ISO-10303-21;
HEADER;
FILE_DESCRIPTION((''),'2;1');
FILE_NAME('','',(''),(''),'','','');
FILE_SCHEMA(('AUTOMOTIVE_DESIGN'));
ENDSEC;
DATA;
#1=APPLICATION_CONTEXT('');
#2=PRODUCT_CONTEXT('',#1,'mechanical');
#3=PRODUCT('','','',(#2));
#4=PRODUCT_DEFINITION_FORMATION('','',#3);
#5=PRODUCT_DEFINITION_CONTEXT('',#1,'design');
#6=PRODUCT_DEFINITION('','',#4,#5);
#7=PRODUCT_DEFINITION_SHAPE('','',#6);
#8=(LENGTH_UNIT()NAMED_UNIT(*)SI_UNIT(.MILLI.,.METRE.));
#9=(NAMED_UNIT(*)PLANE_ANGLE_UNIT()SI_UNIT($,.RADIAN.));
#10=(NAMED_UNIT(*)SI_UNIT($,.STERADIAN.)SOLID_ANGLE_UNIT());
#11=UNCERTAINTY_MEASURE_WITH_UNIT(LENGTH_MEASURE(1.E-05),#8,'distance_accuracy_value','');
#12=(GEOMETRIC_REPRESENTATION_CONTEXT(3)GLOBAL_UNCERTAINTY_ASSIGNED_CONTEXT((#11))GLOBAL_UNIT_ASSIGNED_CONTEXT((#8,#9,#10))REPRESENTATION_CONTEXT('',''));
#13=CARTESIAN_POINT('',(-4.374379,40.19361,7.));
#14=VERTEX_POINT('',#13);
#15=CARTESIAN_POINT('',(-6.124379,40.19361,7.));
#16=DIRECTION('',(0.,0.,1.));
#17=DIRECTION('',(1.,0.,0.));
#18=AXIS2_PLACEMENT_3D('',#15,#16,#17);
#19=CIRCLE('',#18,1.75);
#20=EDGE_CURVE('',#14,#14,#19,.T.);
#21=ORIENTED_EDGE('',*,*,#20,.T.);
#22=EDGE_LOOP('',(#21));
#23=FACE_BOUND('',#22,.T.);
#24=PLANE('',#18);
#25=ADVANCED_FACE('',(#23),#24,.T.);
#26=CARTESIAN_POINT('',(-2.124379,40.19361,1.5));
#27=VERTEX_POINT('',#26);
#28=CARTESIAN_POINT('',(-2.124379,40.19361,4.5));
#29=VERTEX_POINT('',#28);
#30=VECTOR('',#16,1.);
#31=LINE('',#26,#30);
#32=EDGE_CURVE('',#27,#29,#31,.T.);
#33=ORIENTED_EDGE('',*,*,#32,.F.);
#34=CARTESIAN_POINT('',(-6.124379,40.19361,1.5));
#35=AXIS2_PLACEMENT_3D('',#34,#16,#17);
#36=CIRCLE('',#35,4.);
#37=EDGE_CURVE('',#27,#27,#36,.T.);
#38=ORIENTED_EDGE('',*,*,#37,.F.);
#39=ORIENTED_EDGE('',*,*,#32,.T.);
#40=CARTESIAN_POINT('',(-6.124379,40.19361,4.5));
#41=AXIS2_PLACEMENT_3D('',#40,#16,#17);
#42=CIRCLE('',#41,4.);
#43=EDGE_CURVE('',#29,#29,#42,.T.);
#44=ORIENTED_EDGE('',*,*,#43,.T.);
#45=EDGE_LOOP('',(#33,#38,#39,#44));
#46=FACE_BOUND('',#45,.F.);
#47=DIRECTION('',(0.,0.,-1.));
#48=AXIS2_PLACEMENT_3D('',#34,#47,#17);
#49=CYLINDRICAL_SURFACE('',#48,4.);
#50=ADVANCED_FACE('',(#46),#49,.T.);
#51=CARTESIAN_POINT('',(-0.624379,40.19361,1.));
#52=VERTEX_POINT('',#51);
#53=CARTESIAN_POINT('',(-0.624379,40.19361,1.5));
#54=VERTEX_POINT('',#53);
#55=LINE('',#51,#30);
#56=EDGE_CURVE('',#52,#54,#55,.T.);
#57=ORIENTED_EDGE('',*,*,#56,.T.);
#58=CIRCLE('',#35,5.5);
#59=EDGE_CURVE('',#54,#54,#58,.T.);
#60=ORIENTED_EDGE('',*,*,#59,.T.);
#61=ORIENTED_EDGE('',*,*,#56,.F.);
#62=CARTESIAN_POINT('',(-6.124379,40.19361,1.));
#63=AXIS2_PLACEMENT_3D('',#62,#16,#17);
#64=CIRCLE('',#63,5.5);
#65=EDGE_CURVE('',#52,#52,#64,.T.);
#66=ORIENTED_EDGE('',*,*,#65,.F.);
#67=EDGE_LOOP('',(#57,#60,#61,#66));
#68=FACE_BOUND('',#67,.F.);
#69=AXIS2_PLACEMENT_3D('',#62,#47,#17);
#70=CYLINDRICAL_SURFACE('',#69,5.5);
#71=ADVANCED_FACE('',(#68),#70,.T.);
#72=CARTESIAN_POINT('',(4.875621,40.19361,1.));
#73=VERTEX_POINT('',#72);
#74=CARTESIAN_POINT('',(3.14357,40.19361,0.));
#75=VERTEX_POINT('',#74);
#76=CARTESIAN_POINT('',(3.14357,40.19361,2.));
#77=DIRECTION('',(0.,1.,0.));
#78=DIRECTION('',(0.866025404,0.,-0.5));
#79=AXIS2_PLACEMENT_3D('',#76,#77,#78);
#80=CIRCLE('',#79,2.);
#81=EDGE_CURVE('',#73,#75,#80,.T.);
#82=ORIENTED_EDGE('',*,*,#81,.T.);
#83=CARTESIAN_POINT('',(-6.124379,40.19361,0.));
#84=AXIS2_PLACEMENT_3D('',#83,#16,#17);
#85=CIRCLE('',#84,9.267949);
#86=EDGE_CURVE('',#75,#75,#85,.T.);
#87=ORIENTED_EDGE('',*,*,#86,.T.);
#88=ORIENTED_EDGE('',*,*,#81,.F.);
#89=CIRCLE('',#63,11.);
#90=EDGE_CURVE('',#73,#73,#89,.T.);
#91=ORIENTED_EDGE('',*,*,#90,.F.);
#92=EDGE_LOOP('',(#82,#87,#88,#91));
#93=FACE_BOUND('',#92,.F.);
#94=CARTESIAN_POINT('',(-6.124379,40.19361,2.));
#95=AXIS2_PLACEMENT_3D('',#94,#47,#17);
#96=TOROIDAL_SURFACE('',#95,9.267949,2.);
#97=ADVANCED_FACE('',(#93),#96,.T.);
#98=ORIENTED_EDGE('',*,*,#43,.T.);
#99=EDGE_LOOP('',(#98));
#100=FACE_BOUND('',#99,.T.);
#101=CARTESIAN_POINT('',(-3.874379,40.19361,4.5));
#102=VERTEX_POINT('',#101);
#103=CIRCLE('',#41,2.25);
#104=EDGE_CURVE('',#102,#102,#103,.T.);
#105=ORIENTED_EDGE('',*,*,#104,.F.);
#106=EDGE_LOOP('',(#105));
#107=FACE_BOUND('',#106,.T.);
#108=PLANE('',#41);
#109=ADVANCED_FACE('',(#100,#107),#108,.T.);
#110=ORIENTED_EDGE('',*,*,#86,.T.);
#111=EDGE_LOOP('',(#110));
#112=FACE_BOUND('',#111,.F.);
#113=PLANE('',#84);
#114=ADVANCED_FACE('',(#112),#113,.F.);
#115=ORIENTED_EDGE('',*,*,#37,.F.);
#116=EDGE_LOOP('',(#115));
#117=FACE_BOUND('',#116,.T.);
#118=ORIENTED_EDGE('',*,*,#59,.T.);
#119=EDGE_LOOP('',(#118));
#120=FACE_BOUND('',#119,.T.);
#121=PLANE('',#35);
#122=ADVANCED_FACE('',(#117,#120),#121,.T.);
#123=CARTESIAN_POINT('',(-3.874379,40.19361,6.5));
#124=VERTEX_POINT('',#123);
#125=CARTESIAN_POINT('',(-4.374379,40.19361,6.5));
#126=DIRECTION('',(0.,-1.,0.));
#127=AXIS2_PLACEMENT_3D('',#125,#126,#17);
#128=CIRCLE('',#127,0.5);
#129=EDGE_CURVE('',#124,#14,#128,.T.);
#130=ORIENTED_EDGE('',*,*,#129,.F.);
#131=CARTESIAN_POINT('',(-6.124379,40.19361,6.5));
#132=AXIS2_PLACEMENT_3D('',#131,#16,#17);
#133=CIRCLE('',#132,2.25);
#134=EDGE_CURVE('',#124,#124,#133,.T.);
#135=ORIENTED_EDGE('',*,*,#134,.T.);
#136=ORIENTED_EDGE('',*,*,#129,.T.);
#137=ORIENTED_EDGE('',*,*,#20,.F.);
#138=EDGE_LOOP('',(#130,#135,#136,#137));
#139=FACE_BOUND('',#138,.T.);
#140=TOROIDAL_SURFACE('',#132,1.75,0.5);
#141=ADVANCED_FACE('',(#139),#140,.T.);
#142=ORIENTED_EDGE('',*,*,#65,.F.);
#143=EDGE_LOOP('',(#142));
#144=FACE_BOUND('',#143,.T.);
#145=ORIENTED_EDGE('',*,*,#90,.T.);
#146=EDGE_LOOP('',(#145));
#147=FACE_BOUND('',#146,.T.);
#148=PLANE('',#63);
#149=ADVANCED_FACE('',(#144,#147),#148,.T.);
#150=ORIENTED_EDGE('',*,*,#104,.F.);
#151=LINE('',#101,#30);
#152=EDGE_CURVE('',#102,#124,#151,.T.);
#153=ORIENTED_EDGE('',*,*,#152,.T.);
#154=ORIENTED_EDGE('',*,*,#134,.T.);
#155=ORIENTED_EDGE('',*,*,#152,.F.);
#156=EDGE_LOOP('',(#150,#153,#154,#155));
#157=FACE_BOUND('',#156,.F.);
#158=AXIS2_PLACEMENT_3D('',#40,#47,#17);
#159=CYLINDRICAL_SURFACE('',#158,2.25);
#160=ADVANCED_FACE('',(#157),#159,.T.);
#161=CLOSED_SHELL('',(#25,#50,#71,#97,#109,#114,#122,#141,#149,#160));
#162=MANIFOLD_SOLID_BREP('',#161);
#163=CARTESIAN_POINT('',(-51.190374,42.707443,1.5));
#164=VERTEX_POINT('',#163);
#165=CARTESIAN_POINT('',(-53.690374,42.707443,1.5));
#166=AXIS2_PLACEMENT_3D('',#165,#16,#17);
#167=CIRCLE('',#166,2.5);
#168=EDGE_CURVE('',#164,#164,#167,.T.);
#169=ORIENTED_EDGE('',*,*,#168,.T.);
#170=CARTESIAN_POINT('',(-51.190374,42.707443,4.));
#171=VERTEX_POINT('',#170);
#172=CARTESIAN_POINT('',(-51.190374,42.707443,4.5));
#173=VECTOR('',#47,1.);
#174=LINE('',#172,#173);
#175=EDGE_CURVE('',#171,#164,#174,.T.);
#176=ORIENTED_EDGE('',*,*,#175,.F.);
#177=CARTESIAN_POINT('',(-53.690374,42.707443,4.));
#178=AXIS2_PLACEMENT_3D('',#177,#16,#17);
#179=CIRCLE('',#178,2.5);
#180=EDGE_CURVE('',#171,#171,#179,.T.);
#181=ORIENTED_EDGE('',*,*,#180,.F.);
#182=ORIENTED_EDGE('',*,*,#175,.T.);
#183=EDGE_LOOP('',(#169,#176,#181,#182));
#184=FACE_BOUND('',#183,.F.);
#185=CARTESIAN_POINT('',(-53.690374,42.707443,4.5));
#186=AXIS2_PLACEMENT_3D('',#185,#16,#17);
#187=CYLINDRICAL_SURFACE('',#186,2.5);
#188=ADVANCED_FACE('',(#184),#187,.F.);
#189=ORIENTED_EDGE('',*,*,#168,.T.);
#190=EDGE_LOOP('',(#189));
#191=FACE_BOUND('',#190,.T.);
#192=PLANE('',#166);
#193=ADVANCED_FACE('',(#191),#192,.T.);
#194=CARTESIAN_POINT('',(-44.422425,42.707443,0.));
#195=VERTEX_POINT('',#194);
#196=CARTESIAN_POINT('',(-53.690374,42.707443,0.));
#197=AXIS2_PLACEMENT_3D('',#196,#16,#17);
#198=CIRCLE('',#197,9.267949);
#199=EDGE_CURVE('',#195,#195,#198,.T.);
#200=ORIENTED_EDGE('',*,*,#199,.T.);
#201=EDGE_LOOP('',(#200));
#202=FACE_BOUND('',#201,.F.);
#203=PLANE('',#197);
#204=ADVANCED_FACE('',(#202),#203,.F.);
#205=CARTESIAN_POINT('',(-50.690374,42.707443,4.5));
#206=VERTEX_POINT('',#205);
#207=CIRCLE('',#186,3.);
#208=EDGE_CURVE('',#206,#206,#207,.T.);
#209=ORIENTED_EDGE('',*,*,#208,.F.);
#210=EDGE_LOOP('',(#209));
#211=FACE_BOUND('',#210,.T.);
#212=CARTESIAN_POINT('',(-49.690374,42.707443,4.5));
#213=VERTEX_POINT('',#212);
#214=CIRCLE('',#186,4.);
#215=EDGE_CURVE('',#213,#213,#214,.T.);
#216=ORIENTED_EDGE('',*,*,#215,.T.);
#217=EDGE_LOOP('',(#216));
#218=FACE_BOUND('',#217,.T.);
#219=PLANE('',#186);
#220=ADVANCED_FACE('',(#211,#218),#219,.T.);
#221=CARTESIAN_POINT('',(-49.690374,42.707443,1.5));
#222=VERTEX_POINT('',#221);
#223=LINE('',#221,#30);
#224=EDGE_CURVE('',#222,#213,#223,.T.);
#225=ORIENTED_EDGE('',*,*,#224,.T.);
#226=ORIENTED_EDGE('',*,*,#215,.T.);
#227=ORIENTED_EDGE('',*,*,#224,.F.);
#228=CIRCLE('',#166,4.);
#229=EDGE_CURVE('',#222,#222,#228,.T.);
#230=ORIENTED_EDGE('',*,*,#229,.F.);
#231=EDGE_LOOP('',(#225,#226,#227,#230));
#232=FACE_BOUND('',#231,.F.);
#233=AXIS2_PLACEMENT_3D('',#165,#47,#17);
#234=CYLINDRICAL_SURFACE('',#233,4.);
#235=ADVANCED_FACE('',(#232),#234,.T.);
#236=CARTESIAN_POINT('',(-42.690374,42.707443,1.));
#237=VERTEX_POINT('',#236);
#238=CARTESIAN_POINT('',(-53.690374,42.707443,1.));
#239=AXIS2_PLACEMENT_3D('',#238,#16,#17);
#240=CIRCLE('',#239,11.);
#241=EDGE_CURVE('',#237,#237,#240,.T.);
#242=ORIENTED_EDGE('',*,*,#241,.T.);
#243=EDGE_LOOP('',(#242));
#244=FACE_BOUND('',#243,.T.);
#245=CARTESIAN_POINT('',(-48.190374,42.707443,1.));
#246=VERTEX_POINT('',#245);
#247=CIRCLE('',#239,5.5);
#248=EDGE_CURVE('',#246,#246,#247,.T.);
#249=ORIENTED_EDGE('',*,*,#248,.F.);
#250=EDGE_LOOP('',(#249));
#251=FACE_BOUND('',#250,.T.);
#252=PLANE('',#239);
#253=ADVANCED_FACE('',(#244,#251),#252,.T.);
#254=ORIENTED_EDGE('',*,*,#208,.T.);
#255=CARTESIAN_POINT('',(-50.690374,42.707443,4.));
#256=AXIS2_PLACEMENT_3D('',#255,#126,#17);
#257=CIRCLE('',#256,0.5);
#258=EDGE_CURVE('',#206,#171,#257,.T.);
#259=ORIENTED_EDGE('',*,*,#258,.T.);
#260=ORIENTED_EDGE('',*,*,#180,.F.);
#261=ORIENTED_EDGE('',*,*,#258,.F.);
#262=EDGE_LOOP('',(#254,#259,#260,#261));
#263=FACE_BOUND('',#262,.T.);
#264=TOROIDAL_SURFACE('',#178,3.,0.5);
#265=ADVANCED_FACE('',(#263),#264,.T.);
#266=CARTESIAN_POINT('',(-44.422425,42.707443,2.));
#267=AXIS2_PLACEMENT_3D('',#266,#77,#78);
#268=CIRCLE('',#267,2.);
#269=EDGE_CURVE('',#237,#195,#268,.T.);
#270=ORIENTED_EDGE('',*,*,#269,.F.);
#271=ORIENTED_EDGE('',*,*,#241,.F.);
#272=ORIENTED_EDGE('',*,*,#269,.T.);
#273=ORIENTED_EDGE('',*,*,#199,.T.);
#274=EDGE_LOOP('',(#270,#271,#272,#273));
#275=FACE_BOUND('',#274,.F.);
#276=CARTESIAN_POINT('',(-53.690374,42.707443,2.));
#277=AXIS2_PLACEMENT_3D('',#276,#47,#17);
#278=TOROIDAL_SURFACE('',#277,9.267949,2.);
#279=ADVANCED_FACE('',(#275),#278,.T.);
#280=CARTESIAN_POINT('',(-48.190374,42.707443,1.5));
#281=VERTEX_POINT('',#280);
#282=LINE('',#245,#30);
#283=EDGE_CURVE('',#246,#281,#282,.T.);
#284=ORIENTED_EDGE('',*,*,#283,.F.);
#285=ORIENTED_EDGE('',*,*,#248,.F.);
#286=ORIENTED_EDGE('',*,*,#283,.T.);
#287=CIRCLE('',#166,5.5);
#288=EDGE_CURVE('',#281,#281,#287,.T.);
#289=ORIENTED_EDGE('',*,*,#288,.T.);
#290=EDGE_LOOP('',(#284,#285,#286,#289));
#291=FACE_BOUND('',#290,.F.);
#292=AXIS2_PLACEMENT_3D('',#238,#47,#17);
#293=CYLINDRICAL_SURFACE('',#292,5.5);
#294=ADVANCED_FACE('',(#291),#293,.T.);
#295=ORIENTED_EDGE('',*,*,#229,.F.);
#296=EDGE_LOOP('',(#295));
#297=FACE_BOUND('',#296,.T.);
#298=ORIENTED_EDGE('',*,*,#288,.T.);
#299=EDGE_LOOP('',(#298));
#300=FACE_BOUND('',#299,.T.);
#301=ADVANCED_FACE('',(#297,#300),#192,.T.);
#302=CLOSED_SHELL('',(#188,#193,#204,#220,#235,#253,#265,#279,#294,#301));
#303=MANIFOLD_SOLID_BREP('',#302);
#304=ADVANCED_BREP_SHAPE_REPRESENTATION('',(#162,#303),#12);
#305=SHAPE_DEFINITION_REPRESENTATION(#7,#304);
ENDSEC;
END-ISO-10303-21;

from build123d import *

# Parameters (mm, degrees)
F0_R      = 11
F1_DEPTH  = 1
F2_R      = 5.5
F3_DEPTH  = 0.5
F4_R      = 4
F5_DEPTH  = 3
F7_R      = 2.5
F8_DEPTH  = 3
F9_R      = 5.5
F10_DEPTH = 0.5
F11_R     = 4
F12_DEPTH = 3
F13_R     = 2.25
F14_DEPTH = 2.5
F15_R     = 0.5
F15_2_R   = 0.5


# Not quite as in the source:
# - a fillet or chamfer that OpenCascade refuses, or shapes differently, is made with other operations: its cross-section is extruded or revolved along the edge and cut away or added


with BuildPart() as f1:
    # F0 (on Top) → F1 (new body)
    with BuildSketch(Plane.XY):
        with Locations((-53.6903738976, 42.7074432373)):
            Circle(F0_R)
    extrude(amount=F1_DEPTH)

    # F2 (on face) → F3 (join)
    with BuildSketch(Plane.XY.offset(1)):
        with Locations((-53.6903738976, 42.7074432373)):
            Circle(F2_R)
    extrude(amount=F3_DEPTH)

    # F4 (on face) → F5 (join)
    with BuildSketch(Plane.XY.offset(1.5)):
        with Locations((-53.6903738976, 42.7074432373)):
            Circle(F4_R)
    extrude(amount=F5_DEPTH)

    # F6: fillet of radius 2 on 1 edges, made by hand

    # F6_s1 → F6_t2 (revolve, cut)
    with BuildSketch(Plane.XZ.offset(-42.7074432373)):
        with BuildLine():
            ThreePointArc((-42.6903738976, 1), (-43.4224247051, 0.2679491924), (-44.4224247051, 0))
            Line((-44.4224247051, 0), (-42.6903738976, 0))
            Line((-42.6903738976, 0), (-42.6903738976, 1))
        make_face()
    revolve(axis=Axis((-53.6903738976, 42.7074432373, 0), (0, 0, 1)), mode=Mode.SUBTRACT)

    # F7 (on face) → F8 (cut)
    with BuildSketch(Plane.XY.offset(4.5)):
        with Locations((-53.6903738976, 42.7074432373)):
            Circle(F7_R)
    extrude(amount=-F8_DEPTH, mode=Mode.SUBTRACT)

    # F15
    f15_edges = [f1.edges().sort_by_distance(p)[0] for p in [
        (-56.190374, 42.707443, 4.5),
    ]]
    fillet(f15_edges, radius=F15_R)


with BuildPart() as f1b:
    # F0 (on Top) → F1, piece 2 (new body)
    with BuildSketch(Plane.XY):
        with Locations((-6.1243791133, 40.1936098933)):
            Circle(F0_R)
    extrude(amount=F1_DEPTH)

    # F9 (on face) → F10 (join)
    with BuildSketch(Plane.XY.offset(1)):
        with Locations((-6.1243791133, 40.1936098933)):
            Circle(F9_R)
    extrude(amount=F10_DEPTH)

    # F11 (on face) → F12 (join)
    with BuildSketch(Plane.XY.offset(1.5)):
        with Locations((-6.1243791133, 40.1936098933)):
            Circle(F11_R)
    extrude(amount=F12_DEPTH)

    # F13 (on face) → F14 (join)
    with BuildSketch(Plane.XY.offset(4.5)):
        with Locations((-6.1243791133, 40.1936098933)):
            Circle(F13_R)
    extrude(amount=F14_DEPTH)

    # F15#2
    f15_2_edges = [f1b.edges().sort_by_distance(p)[0] for p in [
        (-8.374379, 40.19361, 7),
    ]]
    fillet(f15_2_edges, radius=F15_2_R)

    # F16: fillet of radius 2 on 1 edges, made by hand

    # F16_s1 → F16_t2 (revolve, cut)
    with BuildSketch(Plane.XZ.offset(-40.1936098933)):
        with BuildLine():
            ThreePointArc((4.8756208867, 1), (4.1435700791, 0.2679491924), (3.1435700791, 0))
            Line((3.1435700791, 0), (4.8756208867, 0))
            Line((4.8756208867, 0), (4.8756208867, 1))
        make_face()
    revolve(axis=Axis((-6.1243791133, 40.1936098933, 0), (0, 0, 1)), mode=Mode.SUBTRACT)


solid = Compound([f1.part, f1b.part])
